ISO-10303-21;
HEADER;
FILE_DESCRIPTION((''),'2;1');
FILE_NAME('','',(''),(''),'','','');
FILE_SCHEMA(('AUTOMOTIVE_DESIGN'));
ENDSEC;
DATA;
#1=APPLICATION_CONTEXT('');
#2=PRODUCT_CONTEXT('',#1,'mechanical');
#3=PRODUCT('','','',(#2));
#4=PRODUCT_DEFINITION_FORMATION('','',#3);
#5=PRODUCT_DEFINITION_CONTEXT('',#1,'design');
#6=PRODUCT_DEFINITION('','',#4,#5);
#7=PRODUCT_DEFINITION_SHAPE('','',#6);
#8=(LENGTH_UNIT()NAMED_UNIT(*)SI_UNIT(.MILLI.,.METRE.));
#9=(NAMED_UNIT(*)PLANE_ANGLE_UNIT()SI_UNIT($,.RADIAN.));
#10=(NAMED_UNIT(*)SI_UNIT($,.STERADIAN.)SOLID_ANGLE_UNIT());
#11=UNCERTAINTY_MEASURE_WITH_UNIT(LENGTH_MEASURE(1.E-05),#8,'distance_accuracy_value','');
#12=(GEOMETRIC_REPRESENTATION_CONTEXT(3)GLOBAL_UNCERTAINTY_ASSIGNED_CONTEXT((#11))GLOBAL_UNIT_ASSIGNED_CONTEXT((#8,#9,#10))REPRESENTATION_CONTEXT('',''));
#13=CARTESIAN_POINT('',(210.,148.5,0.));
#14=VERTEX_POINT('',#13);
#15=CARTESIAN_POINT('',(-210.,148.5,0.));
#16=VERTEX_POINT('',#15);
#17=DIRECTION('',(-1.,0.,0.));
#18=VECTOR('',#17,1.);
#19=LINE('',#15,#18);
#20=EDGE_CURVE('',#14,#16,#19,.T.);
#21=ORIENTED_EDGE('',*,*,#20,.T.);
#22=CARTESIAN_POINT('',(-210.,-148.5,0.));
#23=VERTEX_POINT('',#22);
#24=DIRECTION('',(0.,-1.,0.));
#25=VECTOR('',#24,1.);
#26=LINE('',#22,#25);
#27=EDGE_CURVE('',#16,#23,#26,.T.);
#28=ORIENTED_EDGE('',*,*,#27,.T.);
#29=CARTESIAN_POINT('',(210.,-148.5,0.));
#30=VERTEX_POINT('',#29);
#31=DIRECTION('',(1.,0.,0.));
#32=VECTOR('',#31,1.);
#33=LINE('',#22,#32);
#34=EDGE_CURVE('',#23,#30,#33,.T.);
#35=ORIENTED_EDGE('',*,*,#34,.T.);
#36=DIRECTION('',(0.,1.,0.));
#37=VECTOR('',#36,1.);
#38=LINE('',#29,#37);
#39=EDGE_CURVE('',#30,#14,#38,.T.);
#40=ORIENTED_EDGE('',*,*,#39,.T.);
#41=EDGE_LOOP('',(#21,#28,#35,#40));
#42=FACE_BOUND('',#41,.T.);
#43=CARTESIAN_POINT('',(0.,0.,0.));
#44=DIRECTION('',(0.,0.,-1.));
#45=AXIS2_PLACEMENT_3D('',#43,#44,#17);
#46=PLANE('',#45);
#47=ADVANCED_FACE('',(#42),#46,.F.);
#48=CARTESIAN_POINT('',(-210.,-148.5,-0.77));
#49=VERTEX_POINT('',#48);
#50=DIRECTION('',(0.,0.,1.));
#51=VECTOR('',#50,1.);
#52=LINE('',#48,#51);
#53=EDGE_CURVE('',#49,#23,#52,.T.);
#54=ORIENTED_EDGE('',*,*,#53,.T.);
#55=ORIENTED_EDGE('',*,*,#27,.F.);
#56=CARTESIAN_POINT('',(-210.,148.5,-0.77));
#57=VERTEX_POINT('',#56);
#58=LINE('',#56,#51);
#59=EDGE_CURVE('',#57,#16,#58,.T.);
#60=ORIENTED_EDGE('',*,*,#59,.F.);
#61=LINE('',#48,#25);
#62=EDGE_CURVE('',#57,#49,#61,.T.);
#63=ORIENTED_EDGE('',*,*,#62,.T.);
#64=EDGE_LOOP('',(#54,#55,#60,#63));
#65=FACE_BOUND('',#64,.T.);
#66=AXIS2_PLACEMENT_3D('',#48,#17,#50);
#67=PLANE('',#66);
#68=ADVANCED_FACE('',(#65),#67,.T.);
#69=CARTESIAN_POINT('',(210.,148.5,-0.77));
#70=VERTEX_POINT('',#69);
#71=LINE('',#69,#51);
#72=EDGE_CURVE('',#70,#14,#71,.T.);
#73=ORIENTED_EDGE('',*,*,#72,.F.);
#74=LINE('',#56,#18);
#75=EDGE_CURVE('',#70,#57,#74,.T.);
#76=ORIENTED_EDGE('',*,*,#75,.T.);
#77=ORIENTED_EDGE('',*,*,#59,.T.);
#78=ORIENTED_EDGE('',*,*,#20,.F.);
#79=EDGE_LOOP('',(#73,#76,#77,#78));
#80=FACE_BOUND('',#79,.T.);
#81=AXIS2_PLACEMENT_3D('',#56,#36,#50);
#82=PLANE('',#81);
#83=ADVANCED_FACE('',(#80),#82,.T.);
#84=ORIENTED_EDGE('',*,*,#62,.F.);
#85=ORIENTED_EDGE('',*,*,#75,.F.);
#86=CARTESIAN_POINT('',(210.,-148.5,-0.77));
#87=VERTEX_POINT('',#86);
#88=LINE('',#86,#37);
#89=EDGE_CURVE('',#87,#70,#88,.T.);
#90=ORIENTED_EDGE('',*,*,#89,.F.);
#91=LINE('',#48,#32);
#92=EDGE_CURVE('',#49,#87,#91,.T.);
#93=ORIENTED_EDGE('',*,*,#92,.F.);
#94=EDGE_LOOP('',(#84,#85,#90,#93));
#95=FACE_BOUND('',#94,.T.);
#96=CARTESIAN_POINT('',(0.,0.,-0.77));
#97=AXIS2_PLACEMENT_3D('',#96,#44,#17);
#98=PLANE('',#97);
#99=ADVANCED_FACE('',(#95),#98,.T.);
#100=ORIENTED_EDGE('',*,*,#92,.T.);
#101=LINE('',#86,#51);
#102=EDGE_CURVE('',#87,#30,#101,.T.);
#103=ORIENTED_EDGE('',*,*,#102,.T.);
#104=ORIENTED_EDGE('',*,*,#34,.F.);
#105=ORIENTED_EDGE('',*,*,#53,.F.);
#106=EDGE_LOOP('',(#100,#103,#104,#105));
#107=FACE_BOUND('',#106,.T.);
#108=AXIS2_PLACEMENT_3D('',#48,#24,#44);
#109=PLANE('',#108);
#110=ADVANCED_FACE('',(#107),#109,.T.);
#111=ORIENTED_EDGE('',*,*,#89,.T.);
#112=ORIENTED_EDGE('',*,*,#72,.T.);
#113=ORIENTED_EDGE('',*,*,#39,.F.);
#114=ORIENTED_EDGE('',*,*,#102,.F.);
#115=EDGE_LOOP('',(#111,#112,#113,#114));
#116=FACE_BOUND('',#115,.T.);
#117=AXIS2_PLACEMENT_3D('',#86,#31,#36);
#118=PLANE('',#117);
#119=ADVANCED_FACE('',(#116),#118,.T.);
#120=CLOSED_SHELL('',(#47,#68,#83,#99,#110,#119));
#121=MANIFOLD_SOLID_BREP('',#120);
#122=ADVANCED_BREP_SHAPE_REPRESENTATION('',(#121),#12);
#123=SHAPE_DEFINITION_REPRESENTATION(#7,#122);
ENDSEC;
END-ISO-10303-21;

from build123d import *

# Parameters (mm, degrees)
ESBO_O1_W          = 420
ESBO_O1_H          = 297
FLANGE_BASE1_DEPTH = 0.77


# Sheet-metal steps are written as plain solids
with BuildPart() as part:
    # Esboço1 → Flange-base1 (new body)
    with BuildSketch(Plane.XY):
        Rectangle(ESBO_O1_W, ESBO_O1_H)
    extrude(amount=-FLANGE_BASE1_DEPTH)


solid = part.part
